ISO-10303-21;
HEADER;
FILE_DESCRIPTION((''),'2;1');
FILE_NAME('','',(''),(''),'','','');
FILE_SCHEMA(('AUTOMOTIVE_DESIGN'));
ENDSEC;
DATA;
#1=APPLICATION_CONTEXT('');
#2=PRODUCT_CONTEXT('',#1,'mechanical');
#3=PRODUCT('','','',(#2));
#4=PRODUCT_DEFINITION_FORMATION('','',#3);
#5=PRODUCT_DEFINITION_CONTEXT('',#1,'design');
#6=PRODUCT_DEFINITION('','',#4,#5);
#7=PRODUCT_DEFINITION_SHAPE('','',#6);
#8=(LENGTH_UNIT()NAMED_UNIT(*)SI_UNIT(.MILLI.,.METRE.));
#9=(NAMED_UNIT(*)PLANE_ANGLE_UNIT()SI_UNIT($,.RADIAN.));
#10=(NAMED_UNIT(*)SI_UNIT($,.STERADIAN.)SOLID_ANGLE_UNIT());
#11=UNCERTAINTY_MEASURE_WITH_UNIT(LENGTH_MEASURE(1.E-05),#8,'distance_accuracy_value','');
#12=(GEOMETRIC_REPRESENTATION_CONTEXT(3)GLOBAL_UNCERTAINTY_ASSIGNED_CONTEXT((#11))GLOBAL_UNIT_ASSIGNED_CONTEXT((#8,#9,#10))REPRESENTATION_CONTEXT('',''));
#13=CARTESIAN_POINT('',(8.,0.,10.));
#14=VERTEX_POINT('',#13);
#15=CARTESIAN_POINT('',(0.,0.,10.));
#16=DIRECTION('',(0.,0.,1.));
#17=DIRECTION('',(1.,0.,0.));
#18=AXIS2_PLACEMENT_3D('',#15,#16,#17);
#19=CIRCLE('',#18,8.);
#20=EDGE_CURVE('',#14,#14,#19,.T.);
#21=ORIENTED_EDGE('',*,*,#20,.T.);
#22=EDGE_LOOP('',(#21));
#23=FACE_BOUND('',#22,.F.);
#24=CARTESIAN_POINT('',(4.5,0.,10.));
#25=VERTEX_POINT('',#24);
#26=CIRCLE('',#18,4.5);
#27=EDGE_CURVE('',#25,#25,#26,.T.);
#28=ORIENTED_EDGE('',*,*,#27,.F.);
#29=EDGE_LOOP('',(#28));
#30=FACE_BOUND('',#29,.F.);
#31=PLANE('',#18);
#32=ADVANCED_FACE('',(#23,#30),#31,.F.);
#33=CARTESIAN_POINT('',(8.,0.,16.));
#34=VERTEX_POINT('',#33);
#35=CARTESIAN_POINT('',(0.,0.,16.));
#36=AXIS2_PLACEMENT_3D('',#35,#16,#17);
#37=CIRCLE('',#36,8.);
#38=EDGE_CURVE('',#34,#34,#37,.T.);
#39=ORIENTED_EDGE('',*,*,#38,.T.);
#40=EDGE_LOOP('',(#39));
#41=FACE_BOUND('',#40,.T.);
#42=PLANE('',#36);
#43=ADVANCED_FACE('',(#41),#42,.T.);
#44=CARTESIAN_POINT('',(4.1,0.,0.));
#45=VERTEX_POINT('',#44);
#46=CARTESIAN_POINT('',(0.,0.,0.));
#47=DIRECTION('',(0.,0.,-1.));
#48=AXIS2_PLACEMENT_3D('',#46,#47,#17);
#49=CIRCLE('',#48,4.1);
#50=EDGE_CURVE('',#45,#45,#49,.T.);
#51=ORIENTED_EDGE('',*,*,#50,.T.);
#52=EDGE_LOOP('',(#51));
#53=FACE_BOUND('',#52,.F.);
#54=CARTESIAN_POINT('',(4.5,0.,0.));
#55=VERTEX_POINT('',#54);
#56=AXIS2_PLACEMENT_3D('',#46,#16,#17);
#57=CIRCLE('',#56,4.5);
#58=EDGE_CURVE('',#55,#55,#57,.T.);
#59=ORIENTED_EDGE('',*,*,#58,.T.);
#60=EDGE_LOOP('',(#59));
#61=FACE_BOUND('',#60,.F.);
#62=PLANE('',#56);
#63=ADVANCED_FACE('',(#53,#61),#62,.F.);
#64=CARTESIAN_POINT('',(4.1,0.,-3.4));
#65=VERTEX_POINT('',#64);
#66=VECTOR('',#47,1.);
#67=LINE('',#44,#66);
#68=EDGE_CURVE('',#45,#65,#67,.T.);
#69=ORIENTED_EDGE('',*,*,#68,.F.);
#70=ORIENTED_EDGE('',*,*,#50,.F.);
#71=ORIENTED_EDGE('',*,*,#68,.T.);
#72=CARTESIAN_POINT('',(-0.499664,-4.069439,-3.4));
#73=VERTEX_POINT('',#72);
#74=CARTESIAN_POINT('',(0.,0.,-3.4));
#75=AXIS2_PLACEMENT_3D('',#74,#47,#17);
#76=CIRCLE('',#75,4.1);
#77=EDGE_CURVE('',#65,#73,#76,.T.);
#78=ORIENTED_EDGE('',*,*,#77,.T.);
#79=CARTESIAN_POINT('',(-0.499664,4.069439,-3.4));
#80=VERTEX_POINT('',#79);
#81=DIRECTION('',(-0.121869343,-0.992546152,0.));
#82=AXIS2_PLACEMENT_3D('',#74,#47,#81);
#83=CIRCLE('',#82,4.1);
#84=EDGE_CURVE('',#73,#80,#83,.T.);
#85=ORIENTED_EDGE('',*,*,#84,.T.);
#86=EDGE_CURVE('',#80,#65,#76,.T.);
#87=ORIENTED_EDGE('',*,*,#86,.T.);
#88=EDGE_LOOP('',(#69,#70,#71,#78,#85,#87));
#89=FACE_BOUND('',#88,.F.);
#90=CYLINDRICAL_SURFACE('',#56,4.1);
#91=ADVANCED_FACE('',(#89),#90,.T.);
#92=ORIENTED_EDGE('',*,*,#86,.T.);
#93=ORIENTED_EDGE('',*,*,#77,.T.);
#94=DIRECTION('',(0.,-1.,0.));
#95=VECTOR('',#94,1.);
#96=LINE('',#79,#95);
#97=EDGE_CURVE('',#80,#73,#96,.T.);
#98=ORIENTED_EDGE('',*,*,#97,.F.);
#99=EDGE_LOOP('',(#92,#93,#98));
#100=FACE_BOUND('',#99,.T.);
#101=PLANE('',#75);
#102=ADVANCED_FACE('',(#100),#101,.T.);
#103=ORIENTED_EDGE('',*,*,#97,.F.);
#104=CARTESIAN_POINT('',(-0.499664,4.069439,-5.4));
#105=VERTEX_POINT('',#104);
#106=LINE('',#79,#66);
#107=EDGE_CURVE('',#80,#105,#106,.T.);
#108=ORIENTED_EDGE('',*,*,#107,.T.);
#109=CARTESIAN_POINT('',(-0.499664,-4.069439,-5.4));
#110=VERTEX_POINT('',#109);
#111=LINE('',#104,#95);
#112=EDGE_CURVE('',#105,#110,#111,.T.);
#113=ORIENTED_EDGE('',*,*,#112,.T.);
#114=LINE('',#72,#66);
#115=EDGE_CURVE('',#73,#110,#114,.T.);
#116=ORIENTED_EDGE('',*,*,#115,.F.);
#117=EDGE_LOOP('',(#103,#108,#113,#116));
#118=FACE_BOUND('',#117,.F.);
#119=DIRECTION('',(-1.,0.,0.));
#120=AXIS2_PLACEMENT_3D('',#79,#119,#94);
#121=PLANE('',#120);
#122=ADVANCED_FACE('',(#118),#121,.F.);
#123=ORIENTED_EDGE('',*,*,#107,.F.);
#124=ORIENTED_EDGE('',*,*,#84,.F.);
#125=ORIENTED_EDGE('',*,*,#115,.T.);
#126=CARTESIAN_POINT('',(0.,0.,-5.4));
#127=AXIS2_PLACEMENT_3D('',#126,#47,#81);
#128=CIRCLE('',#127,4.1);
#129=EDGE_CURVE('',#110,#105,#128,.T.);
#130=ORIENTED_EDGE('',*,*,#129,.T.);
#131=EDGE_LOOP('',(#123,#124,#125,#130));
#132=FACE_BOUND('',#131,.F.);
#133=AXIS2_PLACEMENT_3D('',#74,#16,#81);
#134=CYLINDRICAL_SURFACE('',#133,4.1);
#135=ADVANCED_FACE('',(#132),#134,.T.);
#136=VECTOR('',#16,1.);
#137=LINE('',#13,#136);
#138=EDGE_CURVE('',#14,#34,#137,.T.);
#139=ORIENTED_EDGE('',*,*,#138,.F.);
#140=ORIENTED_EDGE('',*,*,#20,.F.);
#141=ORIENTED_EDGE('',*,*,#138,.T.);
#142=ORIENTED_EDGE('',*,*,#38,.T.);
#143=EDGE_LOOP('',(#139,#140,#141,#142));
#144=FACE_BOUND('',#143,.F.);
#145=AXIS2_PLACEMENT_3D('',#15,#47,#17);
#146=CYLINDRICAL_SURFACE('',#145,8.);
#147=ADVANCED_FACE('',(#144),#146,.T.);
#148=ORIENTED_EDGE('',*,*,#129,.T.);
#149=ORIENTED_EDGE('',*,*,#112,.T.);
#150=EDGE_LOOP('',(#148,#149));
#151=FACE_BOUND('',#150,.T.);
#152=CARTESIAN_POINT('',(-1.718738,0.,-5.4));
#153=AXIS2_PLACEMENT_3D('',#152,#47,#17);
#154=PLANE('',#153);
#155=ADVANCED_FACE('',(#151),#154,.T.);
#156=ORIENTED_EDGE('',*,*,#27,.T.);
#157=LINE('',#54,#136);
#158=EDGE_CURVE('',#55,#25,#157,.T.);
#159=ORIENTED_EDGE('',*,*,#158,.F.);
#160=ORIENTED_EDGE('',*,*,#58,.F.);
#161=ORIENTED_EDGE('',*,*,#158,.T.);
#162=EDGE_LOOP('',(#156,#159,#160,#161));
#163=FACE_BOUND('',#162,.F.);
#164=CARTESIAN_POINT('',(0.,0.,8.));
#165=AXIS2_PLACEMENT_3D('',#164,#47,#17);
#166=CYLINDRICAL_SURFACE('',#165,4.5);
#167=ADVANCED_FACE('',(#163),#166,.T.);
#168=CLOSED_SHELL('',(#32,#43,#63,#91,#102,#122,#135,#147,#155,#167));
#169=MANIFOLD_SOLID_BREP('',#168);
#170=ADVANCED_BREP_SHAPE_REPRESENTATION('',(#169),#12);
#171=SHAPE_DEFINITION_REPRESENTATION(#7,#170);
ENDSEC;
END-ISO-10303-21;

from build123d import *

# Parameters (mm, degrees)
F0_R     = 4.5
F1_DEPTH = 8
F2_R     = 4.5
F3_DEPTH = 2
F4_R     = 8
F5_DEPTH = 6
F6_R     = 4.1
F7_DEPTH = 3.4
F9_DEPTH = 2


# Not quite as in the source:
# - a feature names something its author has since deleted; it is built from what else it names


with BuildPart() as f1:
    # F0 (on Top) → F1 (new body)
    with BuildSketch(Plane.XY):
        Circle(F0_R)
    extrude(amount=F1_DEPTH)

    # F2 (on face) → F3 (join)
    with BuildSketch(Plane.XY.offset(8)):
        Circle(F2_R)
    extrude(amount=F3_DEPTH)

    # F4 (on face) → F5 (join)
    with BuildSketch(Plane.XY.offset(10)):
        Circle(F4_R)
    extrude(amount=F5_DEPTH)

    # F6 (on face) → F7 (join)
    with BuildSketch(Plane(origin=(0, 0, 0), x_dir=(1, 0, 0), z_dir=(0, 0, -1))):
        Circle(F6_R)
    extrude(amount=F7_DEPTH)

    # F8 (on face) → F9 (join)
    with BuildSketch(Plane(origin=(0, 0, -3.4), x_dir=(1, 0, 0), z_dir=(0, 0, -1))):
        with BuildLine():
            Line((-0.499664308, 0), (-0.499664308, 4.0694392217))
            ThreePointArc((-0.499664308, 4.0694392217), (-4.1, 0), (-0.499664308, -4.0694392217))
            Line((-0.499664308, -4.0694392217), (-0.499664308, 0))
        make_face()
    extrude(amount=F9_DEPTH)


solid = f1.part
